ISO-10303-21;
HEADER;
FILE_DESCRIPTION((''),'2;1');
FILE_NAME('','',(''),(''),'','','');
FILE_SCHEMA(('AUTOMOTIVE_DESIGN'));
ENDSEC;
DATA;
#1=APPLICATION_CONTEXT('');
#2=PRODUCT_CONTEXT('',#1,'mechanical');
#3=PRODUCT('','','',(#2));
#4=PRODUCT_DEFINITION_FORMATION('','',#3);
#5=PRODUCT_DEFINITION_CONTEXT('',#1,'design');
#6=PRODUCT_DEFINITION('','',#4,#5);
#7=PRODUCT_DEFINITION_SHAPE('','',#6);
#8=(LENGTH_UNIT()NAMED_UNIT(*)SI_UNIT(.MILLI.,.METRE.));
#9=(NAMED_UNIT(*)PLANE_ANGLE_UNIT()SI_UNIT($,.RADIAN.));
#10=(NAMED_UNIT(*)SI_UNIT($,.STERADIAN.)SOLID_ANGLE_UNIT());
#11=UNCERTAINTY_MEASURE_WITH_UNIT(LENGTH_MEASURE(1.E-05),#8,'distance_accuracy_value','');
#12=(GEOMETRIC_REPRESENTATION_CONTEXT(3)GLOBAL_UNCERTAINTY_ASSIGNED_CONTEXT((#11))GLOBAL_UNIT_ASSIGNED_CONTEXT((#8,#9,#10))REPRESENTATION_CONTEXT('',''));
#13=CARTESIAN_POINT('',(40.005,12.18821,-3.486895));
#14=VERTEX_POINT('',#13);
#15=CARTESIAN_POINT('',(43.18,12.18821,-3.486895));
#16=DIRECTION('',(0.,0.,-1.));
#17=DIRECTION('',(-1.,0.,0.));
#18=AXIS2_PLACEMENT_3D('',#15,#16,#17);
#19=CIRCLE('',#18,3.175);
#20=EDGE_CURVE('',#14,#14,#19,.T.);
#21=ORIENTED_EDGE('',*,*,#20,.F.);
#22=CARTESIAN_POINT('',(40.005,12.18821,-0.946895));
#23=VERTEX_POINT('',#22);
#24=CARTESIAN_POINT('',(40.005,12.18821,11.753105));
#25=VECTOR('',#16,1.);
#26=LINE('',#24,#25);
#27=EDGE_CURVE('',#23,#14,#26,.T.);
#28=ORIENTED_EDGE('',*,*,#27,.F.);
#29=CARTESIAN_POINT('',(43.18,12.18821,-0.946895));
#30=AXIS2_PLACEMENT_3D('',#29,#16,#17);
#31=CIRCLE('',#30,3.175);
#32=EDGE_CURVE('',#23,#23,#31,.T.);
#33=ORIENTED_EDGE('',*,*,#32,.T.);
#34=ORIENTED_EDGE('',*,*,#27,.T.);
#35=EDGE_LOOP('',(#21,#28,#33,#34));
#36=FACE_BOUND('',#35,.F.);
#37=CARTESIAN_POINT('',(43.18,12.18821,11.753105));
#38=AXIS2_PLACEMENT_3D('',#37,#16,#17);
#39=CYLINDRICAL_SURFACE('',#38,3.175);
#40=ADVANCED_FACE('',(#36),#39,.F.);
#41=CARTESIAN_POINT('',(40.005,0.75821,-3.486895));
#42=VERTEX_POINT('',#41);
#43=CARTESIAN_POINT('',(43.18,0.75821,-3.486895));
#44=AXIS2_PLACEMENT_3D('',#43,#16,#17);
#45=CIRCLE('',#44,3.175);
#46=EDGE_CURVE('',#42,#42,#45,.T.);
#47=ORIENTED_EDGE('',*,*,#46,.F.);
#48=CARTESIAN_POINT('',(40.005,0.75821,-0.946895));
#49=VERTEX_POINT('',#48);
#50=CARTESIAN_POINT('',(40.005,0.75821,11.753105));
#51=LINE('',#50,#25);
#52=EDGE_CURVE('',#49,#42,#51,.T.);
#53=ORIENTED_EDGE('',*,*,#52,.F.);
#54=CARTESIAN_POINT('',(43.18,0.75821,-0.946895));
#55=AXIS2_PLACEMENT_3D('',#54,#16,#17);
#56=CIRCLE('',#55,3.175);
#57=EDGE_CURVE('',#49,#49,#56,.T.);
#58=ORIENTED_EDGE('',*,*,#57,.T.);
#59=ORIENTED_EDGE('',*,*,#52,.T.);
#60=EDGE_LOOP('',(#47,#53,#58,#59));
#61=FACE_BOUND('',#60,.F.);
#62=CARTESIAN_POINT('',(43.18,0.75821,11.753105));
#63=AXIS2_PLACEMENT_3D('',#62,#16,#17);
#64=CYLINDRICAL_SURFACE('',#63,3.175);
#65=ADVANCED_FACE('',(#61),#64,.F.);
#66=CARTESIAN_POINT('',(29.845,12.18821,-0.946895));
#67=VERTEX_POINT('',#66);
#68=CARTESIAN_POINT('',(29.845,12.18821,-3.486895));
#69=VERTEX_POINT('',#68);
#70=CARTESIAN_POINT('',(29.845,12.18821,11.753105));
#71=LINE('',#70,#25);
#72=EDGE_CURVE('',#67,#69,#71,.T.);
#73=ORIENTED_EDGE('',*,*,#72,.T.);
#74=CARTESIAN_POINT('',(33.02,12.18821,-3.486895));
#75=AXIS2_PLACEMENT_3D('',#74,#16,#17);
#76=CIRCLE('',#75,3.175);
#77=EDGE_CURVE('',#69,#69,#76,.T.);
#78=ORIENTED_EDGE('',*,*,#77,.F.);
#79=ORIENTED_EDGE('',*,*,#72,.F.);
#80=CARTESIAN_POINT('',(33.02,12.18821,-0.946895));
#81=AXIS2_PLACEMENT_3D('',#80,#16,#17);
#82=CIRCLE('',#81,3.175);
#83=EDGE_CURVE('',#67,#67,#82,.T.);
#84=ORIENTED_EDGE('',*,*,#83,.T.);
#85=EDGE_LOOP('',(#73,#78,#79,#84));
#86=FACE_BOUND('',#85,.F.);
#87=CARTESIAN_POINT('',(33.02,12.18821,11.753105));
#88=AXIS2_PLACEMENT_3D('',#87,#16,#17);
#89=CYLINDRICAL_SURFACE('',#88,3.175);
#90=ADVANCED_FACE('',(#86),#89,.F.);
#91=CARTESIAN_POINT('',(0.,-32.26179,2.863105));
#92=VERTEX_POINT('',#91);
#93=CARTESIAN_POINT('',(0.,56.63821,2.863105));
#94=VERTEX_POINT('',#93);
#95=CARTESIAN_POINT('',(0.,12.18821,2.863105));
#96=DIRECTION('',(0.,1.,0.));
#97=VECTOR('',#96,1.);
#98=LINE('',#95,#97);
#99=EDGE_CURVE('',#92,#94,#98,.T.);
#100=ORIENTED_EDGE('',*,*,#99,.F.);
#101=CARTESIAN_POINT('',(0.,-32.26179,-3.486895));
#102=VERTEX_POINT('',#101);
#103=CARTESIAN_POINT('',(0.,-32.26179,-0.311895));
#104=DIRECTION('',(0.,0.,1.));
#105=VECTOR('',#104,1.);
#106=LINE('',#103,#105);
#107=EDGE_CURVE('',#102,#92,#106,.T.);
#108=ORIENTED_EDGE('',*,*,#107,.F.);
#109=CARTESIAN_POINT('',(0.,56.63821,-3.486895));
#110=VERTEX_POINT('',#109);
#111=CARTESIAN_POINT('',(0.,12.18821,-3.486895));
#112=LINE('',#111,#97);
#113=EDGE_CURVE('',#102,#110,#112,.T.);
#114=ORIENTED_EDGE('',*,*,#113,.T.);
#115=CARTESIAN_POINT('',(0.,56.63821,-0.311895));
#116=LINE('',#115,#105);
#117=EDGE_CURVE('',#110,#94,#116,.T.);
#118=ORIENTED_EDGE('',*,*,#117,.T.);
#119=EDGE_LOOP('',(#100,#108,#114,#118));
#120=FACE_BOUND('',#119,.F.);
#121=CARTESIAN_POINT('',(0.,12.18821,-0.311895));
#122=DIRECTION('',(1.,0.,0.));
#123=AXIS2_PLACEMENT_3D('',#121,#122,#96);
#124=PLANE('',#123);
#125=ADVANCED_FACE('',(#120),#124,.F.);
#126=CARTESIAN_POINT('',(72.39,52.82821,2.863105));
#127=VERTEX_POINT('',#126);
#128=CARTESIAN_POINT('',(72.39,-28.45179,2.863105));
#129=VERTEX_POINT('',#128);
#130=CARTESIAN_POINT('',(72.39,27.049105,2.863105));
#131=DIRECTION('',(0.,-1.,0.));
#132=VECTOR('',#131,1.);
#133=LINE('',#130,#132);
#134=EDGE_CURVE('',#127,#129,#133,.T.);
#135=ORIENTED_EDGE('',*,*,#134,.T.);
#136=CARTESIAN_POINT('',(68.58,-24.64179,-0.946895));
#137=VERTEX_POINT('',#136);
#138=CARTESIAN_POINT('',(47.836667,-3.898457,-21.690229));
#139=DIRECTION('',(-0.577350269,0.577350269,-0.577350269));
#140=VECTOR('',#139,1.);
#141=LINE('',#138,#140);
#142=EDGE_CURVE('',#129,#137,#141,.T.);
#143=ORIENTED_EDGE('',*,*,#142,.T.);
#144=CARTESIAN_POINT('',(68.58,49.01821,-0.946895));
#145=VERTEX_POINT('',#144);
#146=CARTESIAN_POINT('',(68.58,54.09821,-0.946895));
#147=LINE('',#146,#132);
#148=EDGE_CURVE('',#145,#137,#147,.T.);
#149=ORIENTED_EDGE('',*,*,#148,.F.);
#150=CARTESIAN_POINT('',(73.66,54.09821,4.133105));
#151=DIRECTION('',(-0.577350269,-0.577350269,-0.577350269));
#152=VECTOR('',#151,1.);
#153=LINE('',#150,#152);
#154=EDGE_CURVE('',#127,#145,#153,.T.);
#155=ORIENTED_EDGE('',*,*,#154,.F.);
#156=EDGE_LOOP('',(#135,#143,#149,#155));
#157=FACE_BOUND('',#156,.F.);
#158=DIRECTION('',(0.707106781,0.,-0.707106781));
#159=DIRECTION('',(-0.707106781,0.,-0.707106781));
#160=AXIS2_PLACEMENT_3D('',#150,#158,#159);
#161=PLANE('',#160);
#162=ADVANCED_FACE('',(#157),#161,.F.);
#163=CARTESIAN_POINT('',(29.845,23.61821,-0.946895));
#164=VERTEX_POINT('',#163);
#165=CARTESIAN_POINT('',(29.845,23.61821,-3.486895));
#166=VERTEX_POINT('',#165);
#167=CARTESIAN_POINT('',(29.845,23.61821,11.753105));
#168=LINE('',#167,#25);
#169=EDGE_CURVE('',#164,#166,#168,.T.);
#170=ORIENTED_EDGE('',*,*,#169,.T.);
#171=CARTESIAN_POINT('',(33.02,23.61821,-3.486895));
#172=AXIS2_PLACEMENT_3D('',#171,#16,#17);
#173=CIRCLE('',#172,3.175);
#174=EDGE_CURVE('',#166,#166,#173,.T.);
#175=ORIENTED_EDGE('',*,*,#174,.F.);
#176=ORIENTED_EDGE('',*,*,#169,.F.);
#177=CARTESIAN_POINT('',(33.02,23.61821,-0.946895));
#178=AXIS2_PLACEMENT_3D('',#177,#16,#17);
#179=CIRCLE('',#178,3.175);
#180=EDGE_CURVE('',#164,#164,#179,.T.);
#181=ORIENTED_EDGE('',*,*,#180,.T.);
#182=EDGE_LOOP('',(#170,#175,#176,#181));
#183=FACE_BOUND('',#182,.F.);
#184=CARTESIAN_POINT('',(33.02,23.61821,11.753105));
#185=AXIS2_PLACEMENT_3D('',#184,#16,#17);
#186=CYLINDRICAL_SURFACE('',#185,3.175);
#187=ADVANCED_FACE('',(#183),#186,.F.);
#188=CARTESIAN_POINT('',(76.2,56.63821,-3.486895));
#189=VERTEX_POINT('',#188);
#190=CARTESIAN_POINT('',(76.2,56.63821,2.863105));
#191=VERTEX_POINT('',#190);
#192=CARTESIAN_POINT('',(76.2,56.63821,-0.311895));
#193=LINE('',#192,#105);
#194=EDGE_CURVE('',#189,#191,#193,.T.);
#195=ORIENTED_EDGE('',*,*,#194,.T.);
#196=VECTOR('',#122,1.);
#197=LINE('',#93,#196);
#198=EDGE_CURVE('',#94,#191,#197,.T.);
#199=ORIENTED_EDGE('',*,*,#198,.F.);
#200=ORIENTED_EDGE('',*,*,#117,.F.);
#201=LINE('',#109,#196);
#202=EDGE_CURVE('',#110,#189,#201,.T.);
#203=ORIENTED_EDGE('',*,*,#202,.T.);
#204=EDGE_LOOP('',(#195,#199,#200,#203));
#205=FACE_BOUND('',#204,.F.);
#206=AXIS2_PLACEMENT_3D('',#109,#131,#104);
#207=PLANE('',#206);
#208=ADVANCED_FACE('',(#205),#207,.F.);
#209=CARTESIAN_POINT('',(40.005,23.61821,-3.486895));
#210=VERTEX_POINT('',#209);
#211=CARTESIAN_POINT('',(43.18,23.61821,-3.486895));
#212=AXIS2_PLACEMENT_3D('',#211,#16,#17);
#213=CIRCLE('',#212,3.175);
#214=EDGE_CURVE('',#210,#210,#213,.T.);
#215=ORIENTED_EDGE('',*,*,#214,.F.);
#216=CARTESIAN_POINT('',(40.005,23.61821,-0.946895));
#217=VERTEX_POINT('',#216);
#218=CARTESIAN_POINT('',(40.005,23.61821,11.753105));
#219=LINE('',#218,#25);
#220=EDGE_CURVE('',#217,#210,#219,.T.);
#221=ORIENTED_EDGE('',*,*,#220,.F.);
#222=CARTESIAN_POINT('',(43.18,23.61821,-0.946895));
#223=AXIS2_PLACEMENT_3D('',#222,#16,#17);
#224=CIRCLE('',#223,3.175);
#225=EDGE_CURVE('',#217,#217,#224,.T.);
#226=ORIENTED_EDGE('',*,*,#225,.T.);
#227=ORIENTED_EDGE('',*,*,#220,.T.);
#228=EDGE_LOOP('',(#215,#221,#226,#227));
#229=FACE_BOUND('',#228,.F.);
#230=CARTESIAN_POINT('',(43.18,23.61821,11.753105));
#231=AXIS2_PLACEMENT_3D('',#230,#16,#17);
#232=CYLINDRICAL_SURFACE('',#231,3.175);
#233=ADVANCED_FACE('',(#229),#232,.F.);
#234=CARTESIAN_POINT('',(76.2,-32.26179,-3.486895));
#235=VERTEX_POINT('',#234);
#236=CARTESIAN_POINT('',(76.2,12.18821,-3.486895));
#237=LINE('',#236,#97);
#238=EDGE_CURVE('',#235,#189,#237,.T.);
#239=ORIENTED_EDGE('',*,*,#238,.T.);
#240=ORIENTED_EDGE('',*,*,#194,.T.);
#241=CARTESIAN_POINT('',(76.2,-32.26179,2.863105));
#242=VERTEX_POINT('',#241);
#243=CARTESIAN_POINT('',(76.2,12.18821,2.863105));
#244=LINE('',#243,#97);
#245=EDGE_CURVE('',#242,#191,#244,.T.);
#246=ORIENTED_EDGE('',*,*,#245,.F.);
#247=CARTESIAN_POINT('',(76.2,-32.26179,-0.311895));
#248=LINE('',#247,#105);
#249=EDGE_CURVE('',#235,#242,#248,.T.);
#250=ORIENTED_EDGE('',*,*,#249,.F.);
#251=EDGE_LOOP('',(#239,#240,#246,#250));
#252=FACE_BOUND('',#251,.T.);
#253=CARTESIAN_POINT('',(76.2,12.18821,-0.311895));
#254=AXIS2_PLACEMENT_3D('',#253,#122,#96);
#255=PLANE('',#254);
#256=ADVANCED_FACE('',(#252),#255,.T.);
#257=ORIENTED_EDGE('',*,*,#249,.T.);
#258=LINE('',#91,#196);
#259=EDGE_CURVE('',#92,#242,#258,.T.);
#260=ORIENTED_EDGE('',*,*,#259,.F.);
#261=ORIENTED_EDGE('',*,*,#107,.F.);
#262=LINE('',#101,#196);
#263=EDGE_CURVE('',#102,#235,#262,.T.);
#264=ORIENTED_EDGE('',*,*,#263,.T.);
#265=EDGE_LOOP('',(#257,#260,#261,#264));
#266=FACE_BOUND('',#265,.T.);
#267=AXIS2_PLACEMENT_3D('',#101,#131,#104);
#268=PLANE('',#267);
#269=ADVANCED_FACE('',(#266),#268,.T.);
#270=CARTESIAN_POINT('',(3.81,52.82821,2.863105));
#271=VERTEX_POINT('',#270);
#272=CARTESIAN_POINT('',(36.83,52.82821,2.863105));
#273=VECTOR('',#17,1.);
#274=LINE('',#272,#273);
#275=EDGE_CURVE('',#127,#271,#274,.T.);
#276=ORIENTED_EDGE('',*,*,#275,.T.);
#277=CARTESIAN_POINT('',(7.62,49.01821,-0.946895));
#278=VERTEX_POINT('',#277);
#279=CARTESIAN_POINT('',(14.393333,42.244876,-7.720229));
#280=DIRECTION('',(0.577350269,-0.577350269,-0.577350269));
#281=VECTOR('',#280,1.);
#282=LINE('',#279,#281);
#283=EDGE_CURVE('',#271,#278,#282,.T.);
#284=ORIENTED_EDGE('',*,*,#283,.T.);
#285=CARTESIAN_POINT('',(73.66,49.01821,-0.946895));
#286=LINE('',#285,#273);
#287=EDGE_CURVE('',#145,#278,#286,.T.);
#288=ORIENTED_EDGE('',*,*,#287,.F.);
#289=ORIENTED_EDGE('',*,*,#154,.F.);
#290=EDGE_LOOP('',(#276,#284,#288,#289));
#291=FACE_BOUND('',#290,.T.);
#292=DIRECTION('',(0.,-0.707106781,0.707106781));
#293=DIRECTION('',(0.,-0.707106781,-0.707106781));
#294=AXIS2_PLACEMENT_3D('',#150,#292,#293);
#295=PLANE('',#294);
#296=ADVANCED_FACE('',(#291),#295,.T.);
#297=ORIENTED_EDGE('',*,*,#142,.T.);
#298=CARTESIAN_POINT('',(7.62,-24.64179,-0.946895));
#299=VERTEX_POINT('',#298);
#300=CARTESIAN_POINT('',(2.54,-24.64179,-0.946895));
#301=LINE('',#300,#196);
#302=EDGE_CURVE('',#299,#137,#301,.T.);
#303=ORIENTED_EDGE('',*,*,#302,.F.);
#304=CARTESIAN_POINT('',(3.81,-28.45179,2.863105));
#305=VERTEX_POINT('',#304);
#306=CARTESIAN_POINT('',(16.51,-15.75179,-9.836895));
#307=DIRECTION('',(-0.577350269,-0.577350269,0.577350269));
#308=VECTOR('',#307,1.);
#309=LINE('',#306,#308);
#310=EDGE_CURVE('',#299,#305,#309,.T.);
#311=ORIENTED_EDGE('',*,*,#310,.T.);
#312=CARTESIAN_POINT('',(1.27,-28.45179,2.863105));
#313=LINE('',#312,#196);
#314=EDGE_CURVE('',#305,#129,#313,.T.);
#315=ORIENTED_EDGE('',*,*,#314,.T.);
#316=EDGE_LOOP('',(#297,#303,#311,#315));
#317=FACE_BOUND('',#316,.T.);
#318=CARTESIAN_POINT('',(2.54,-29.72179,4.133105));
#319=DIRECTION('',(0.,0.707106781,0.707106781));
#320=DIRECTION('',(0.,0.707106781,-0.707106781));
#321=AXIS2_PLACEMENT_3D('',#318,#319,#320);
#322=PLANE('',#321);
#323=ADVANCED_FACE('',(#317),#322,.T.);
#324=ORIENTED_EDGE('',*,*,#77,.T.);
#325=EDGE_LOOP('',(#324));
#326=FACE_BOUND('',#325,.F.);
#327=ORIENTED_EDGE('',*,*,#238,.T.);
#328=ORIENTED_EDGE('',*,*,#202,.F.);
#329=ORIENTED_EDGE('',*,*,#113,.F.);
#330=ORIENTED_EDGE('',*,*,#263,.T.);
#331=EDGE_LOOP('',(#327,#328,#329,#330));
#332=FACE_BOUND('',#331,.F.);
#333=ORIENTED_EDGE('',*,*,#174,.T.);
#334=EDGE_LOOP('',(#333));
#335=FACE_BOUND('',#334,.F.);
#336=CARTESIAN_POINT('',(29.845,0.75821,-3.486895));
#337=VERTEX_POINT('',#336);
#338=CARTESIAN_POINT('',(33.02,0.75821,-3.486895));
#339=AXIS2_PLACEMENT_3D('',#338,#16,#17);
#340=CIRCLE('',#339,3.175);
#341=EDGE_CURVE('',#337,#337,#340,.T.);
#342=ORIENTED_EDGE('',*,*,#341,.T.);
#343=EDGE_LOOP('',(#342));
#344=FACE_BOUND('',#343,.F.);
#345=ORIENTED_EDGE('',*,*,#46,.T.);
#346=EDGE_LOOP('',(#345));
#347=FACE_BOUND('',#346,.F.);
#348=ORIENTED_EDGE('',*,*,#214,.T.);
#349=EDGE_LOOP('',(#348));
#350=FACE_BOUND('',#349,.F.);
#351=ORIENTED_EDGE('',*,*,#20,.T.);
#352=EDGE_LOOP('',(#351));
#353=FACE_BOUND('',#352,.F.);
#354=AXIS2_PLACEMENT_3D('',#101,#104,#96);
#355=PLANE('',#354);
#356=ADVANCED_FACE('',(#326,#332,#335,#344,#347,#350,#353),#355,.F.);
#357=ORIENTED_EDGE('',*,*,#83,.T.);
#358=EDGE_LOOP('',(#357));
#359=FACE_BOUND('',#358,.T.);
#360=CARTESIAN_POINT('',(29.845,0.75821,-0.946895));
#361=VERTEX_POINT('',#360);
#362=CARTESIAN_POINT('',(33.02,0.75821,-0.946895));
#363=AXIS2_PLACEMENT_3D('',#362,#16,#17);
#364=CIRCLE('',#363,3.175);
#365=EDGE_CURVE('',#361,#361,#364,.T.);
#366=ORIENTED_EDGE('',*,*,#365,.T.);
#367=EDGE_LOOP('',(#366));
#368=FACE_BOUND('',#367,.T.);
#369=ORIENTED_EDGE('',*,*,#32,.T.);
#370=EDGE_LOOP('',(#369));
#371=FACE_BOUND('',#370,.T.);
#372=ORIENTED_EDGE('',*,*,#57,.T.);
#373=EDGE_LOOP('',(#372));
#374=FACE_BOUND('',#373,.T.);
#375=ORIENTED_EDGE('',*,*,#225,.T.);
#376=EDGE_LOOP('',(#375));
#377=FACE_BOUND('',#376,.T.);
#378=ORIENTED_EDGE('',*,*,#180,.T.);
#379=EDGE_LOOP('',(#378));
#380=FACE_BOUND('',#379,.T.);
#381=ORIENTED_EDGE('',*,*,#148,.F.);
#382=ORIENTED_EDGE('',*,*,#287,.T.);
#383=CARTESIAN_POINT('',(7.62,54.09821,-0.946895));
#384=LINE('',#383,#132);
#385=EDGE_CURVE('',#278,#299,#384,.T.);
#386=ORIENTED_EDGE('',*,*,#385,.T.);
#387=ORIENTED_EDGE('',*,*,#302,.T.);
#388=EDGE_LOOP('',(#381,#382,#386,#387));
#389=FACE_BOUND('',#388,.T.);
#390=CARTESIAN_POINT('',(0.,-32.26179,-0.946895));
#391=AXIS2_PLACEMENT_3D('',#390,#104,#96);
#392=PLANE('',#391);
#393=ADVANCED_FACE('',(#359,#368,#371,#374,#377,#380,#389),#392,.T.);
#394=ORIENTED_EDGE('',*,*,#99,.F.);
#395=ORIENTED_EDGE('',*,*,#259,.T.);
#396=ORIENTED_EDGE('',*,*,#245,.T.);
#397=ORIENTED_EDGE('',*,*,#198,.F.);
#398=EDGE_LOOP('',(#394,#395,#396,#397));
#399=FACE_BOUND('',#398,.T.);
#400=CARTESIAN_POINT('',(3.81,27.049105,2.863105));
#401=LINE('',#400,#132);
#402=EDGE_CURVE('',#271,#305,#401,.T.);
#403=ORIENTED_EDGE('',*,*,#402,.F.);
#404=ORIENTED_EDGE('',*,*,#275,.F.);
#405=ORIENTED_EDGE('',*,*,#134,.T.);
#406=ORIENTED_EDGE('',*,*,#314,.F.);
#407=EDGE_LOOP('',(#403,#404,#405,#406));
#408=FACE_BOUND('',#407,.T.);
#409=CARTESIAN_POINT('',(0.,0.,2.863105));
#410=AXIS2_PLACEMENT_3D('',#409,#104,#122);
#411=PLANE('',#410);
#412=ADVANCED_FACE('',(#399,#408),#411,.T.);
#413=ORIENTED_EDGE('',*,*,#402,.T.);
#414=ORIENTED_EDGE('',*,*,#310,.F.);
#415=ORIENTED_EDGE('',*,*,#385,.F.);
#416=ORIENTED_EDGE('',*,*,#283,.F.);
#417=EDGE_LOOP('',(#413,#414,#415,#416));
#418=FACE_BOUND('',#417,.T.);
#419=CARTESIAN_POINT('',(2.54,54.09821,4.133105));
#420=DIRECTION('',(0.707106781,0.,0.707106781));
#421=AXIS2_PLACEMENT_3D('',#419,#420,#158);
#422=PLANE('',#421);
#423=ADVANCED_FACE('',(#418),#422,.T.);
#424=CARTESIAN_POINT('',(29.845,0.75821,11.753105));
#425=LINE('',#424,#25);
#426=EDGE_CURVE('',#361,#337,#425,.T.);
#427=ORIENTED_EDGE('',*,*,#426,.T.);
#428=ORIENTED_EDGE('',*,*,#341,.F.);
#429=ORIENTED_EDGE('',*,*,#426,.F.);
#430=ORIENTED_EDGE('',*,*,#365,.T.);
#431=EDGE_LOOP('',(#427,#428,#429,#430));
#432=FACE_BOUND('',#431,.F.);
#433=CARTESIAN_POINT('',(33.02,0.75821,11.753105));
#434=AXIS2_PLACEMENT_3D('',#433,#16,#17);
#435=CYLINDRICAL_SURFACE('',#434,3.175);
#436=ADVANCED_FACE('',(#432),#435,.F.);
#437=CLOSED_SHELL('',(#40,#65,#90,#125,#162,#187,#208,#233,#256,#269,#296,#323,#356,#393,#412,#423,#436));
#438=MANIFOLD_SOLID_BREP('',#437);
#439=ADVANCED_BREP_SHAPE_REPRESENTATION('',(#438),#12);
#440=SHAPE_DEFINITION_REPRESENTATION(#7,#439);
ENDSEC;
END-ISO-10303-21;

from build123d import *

# Parameters (mm, degrees)
F0_W         = 88.9
F0_H         = 6.35
F1_DEPTH     = 76.2
F2_T         = -2.54
F3_T4_DEPTH  = 83.82
F3_T9_DEPTH  = 71.12
F3_T14_DEPTH = 83.82
F3_T19_DEPTH = 71.12
F5_D         = 6.35
F5_DEPTH     = 12.7
F5_TIP       = 1.9077324654


# Not quite as in the source:
# - a fillet or chamfer that OpenCascade refuses, or shapes differently, is made with other operations: its cross-section is extruded or revolved along the edge and cut away or added


with BuildPart() as f1:
    # F0 (on Right) → F1 (new body)
    with BuildSketch(Plane.YZ):
        with Locations((12.1882097632, -0.3118954591)):
            Rectangle(F0_W, F0_H)
    extrude(amount=F1_DEPTH)

    # F2
    f2_openings = [f1.faces().sort_by_distance(p)[0] for p in [
        (38.1, 12.18821, 2.863105),
    ]]
    offset(amount=F2_T, openings=f2_openings)

    # F3: chamfer of 5.08 on 4 edges, made by hand


with BuildPart() as f3_tool2:
    # F3_s3 → F3_t4 (new body)
    with BuildSketch(Plane.XZ.offset(-54.0982097632)):
        Polygon((2.54, 4.1331045409), (7.62, -0.9468954591), (2.54, -0.9468954591), align=None)
    extrude(amount=F3_T4_DEPTH)

    split(bisect_by=Plane.XY.offset(2.8631045409), keep=Keep.BOTTOM)


with BuildPart() as f1_1:
    add(f1.part)

    # F3_t1: union F3_tool2
    add(f3_tool2.part)


with BuildPart() as f3_tool7:
    # F3_s8 → F3_t9 (new body)
    with BuildSketch(Plane.YZ.offset(2.54)):
        Polygon((-29.7217902368, 4.1331045409), (-24.6417902368, -0.9468954591), (-29.7217902368, -0.9468954591), align=None)
    extrude(amount=F3_T9_DEPTH)

    split(bisect_by=Plane.XY.offset(2.8631045409), keep=Keep.BOTTOM)


with BuildPart() as f1_2:
    add(f1_1.part)

    # F3_t6: union F3_tool7
    add(f3_tool7.part)


with BuildPart() as f3_tool12:
    # F3_s13 → F3_t14 (new body)
    with BuildSketch(Plane.XZ.offset(-54.0982097632)):
        Polygon((73.66, 4.1331045409), (68.58, -0.9468954591), (73.66, -0.9468954591), align=None)
    extrude(amount=F3_T14_DEPTH)

    split(bisect_by=Plane.XY.offset(2.8631045409), keep=Keep.BOTTOM)


with BuildPart() as f1_3:
    add(f1_2.part)

    # F3_t11: union F3_tool12
    add(f3_tool12.part)


with BuildPart() as f3_tool17:
    # F3_s18 → F3_t19 (new body)
    with BuildSketch(Plane.YZ.offset(73.66)):
        Polygon((54.0982097632, 4.1331045409), (49.0182097632, -0.9468954591), (54.0982097632, -0.9468954591), align=None)
    extrude(amount=-F3_T19_DEPTH)

    split(bisect_by=Plane.XY.offset(2.8631045409), keep=Keep.BOTTOM)


with BuildPart() as f1_4:
    add(f1_3.part)

    # F3_t16: union F3_tool17
    add(f3_tool17.part)

    # F5
    with Locations(Plane.XY.offset(-0.9468954591)):
        with Locations((33.02, 23.6182097632), (43.18, 23.6182097632), (43.18, 12.1882097632), (33.02, 12.1882097632), (33.02, 0.7582097632), (43.18, 0.7582097632)):
            Hole(F5_D / 2, depth=F5_DEPTH)
            with Locations((0, 0, -(F5_DEPTH + F5_TIP / 2))):  # 118° drill point
                Cone(0, F5_D / 2, F5_TIP, mode=Mode.SUBTRACT)


solid = f1_4.part
